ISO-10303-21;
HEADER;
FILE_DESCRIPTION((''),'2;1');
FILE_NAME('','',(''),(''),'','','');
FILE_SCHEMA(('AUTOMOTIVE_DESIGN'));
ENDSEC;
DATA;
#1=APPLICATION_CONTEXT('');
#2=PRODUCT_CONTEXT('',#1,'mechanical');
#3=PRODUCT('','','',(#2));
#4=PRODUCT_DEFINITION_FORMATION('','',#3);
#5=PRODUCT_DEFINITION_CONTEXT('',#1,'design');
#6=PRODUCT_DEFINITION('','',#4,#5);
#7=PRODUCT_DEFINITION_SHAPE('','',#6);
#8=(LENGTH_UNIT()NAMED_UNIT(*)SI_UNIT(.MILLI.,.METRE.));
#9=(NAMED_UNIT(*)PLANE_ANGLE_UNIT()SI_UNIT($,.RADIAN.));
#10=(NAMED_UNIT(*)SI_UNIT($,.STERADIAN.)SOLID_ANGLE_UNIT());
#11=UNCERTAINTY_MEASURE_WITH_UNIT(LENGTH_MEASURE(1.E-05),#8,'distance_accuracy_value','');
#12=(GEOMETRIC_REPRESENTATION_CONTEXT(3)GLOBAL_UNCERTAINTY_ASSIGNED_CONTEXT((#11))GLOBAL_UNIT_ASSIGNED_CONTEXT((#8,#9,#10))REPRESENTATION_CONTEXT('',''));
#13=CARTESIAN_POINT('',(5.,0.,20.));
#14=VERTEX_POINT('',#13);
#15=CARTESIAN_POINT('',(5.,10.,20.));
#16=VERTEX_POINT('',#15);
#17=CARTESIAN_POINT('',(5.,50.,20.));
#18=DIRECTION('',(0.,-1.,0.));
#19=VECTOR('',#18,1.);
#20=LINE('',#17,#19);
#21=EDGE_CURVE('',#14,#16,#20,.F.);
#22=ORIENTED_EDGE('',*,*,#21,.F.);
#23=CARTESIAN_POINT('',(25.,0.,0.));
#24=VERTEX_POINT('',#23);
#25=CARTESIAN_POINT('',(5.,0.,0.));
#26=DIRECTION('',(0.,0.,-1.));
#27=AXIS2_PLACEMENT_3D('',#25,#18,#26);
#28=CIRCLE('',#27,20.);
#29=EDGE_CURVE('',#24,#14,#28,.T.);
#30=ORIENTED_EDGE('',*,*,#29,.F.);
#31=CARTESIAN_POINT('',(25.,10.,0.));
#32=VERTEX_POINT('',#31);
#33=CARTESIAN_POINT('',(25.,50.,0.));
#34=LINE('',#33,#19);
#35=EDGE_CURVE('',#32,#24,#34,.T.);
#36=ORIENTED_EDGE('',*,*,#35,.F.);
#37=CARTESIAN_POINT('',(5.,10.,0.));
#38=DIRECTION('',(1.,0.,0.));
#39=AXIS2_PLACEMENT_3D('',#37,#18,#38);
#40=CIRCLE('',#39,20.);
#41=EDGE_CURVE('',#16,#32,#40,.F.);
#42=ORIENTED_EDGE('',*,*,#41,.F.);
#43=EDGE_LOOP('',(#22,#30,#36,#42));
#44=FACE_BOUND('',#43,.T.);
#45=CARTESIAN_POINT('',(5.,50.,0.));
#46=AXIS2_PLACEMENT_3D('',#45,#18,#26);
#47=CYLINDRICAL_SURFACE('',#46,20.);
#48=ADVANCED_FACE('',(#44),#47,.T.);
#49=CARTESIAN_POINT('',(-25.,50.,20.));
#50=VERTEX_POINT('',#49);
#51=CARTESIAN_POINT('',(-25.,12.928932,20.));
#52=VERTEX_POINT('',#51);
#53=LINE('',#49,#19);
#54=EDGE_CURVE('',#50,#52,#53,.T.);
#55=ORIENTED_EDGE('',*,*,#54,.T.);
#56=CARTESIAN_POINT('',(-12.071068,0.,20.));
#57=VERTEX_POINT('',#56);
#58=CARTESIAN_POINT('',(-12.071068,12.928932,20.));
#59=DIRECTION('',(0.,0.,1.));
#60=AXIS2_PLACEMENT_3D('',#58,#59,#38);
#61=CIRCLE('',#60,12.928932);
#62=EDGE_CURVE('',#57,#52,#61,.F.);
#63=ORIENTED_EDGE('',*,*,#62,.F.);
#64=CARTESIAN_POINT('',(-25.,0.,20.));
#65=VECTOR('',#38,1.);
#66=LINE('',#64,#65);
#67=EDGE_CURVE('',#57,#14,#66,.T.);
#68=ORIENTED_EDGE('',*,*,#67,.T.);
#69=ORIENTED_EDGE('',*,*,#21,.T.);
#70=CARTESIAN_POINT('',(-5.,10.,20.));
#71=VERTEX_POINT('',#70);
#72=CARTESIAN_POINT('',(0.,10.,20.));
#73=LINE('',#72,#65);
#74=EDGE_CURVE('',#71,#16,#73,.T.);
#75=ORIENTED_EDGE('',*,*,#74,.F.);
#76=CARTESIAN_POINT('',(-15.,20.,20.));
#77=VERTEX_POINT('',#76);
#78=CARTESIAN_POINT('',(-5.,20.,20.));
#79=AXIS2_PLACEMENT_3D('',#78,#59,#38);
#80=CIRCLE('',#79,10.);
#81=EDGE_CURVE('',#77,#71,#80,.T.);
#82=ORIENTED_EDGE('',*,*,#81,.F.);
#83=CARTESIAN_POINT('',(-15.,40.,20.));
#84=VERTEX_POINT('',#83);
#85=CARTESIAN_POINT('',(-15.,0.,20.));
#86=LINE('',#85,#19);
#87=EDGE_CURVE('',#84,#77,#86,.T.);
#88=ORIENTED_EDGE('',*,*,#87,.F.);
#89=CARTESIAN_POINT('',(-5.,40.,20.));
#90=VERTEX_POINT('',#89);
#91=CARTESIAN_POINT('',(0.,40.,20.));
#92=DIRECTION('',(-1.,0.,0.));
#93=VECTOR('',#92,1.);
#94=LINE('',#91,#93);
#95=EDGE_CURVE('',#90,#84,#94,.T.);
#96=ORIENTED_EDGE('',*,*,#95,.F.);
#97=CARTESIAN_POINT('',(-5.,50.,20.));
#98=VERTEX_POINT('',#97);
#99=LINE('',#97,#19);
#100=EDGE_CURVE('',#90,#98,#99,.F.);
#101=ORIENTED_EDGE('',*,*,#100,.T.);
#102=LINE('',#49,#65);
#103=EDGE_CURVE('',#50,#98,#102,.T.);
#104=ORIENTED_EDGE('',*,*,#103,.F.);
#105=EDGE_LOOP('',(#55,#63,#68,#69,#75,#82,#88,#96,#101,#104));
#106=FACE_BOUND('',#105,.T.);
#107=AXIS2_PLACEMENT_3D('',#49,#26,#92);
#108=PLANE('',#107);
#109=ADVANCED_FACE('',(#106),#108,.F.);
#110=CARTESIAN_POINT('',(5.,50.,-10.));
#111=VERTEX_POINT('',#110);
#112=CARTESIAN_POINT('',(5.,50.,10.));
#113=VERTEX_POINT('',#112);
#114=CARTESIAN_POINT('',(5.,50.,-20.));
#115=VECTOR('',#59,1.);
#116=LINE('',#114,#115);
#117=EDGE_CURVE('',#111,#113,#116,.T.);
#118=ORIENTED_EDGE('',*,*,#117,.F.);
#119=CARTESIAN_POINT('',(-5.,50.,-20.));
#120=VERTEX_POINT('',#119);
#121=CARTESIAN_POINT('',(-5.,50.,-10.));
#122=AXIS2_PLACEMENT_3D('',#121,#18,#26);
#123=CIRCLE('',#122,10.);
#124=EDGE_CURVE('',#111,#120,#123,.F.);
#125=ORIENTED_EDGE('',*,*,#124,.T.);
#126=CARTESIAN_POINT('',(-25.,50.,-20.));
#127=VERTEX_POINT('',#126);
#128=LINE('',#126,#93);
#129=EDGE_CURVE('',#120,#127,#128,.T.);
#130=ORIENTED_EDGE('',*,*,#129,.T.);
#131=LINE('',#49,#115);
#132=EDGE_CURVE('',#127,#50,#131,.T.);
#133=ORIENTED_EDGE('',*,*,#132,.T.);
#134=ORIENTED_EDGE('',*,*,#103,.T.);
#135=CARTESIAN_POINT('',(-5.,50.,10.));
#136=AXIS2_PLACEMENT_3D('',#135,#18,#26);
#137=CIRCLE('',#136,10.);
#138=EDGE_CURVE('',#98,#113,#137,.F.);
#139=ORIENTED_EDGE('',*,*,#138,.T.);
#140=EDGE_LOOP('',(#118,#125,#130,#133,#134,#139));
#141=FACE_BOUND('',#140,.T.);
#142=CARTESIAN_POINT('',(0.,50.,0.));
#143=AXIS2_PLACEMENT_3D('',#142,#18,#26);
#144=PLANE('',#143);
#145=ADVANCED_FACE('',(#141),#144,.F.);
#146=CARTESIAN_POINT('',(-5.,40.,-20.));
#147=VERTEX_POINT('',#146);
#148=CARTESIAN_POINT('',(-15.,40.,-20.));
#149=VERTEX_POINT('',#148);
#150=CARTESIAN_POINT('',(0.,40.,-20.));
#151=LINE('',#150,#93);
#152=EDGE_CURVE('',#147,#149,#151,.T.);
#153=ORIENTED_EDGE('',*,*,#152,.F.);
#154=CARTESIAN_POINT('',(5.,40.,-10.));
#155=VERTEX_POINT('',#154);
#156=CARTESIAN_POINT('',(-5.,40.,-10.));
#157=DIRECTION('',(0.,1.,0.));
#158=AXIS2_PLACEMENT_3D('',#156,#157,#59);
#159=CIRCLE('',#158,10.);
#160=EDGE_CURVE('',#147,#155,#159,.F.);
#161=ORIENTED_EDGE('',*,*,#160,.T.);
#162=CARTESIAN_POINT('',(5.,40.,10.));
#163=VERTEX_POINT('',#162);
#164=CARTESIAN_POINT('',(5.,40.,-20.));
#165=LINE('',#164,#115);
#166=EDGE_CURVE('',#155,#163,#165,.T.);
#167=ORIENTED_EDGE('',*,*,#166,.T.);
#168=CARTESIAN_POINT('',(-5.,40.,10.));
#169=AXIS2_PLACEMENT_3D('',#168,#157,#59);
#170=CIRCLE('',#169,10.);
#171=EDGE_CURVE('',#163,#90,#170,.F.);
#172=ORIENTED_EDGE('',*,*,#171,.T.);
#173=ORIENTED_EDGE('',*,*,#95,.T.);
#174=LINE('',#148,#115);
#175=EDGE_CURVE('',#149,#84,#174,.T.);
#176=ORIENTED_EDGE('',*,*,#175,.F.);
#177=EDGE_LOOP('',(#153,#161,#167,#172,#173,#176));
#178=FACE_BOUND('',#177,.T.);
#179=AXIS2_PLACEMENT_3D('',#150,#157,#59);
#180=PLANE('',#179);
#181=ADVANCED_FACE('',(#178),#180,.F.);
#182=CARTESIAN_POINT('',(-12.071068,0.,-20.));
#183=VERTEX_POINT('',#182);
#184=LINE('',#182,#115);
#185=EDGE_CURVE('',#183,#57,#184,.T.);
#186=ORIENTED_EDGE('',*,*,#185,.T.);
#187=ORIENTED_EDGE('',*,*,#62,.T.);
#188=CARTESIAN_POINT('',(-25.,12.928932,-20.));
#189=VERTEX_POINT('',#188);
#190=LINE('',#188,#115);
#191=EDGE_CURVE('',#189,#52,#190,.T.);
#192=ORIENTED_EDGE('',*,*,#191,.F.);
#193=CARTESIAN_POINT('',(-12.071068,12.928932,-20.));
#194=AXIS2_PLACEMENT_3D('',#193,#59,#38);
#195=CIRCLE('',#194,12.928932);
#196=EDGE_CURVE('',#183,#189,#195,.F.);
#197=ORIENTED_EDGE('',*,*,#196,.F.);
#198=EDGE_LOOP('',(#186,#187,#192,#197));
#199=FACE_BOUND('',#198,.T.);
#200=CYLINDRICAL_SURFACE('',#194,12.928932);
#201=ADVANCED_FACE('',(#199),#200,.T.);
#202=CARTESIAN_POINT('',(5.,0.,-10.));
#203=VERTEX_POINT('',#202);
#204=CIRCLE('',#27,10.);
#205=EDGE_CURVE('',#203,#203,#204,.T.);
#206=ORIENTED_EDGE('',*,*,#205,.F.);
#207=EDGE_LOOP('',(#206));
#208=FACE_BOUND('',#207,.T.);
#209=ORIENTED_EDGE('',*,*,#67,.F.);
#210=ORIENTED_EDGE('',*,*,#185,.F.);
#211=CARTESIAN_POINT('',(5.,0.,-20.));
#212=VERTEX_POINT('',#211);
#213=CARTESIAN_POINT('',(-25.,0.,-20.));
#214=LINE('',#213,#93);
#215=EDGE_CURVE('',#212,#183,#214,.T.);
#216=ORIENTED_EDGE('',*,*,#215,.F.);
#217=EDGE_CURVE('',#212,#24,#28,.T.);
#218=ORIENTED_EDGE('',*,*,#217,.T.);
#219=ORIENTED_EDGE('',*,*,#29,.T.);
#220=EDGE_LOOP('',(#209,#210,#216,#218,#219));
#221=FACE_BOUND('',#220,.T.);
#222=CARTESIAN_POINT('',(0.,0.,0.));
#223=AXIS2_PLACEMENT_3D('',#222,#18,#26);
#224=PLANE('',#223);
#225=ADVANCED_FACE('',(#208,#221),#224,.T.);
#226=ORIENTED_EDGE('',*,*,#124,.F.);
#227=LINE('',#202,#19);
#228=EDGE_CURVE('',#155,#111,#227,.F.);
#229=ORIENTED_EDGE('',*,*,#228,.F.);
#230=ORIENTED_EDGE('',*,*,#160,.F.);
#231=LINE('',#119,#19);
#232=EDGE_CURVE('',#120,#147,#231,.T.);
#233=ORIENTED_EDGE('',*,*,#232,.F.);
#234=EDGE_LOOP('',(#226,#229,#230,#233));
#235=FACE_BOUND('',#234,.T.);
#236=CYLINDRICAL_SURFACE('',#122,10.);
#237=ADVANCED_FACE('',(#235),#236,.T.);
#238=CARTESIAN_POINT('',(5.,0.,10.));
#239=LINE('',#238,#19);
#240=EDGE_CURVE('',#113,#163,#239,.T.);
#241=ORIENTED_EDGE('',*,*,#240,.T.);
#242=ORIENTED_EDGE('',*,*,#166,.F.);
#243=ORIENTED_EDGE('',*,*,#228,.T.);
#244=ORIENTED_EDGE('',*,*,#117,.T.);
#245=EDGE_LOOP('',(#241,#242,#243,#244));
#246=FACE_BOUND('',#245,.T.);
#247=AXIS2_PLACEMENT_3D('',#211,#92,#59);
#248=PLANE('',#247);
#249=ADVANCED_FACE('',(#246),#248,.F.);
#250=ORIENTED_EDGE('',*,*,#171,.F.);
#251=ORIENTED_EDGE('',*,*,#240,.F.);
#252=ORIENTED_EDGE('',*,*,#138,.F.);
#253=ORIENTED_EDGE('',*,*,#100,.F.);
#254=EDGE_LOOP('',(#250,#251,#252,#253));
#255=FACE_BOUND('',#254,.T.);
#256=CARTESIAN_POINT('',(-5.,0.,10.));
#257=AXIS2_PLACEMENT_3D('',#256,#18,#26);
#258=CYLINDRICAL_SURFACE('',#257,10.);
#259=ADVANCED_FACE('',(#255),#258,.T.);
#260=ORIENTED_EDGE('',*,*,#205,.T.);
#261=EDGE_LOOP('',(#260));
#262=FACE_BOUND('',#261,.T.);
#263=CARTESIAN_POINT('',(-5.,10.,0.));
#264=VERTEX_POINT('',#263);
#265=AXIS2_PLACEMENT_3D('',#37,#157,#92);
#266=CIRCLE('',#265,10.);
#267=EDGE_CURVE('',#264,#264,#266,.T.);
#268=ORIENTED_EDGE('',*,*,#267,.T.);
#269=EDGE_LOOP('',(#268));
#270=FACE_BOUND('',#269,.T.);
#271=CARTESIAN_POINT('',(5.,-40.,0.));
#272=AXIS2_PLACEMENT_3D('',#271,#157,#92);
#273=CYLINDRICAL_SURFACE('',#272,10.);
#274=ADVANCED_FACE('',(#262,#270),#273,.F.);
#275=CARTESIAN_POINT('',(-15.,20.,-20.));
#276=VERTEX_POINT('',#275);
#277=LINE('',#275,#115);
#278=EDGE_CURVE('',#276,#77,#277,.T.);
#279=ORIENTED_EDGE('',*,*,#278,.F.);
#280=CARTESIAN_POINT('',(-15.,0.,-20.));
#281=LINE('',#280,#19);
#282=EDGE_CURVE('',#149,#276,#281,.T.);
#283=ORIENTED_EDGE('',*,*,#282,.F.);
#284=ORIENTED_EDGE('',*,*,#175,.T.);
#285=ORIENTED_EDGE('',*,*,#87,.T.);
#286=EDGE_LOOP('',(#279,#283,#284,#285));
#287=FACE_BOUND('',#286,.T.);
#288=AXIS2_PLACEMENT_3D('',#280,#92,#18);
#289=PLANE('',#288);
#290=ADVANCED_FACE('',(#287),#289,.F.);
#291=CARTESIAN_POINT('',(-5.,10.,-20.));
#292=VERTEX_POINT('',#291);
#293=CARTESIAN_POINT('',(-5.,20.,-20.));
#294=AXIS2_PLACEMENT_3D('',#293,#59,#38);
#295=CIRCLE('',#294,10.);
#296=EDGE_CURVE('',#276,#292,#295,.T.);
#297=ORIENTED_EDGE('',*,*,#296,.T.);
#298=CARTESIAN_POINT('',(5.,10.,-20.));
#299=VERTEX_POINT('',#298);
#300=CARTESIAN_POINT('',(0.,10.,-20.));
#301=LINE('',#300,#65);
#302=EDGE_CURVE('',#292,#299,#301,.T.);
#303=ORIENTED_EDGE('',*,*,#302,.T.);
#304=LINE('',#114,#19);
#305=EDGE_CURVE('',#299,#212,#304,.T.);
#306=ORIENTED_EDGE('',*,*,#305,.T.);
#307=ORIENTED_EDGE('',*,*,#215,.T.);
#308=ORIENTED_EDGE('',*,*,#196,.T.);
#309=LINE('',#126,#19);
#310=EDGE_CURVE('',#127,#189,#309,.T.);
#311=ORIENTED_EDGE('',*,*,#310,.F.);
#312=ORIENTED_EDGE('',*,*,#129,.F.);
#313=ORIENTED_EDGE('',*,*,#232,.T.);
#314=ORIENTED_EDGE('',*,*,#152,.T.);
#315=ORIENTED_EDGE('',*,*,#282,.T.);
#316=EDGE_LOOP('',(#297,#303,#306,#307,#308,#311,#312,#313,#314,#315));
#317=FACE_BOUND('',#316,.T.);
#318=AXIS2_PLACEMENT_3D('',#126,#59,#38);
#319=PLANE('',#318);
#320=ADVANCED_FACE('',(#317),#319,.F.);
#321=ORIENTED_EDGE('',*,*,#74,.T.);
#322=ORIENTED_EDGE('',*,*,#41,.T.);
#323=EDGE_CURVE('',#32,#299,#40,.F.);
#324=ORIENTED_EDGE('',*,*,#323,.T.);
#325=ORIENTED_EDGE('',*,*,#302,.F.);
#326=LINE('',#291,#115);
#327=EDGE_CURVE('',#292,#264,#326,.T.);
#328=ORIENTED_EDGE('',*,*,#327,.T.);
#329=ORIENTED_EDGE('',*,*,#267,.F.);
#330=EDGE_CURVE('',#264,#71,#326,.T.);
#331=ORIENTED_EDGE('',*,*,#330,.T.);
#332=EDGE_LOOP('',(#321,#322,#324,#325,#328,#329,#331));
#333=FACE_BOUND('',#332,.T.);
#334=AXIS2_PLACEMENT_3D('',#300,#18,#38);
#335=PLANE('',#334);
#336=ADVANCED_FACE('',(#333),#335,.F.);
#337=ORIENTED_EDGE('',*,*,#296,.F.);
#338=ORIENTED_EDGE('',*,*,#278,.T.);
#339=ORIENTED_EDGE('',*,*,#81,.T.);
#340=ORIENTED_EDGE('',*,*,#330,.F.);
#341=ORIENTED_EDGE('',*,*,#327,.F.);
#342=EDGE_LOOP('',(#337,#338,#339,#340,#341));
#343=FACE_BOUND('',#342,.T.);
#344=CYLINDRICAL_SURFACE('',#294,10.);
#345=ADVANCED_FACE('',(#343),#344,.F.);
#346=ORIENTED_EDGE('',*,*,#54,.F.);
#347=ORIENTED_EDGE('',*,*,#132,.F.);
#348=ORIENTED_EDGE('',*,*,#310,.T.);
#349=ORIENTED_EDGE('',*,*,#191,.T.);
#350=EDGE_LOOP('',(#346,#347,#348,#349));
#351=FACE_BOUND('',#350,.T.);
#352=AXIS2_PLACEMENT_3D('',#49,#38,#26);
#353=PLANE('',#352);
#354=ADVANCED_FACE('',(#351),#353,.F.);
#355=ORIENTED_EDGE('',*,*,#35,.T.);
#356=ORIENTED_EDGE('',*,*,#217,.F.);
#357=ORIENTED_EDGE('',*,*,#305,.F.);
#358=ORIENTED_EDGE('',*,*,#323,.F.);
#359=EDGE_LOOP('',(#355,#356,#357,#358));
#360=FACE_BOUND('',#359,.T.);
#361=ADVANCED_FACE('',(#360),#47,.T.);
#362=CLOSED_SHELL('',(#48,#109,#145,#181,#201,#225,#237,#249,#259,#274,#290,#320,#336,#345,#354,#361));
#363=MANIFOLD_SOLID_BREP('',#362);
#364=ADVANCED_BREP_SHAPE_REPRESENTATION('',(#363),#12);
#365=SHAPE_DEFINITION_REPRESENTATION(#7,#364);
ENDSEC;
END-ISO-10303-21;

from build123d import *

# Parameters (mm, degrees)
SKETCH_1_W          = 50
SKETCH_1_H          = 40
EXTRUDE_1_DEPTH     = 50
CUT_EXTRUDE_1_DEPTH = 69.738635424
FILLET_1_R          = 10
FILLET_2_R          = 20
SKETCH_4_R          = 10
CUT_EXTRUDE_2_DEPTH = 50


with BuildPart() as part:
    # 草圖1 → 填料-伸長1 (new body)
    with BuildSketch(Plane(origin=(0, 0, 0), x_dir=(1, 0, 0), z_dir=(0, 1, 0))):
        Rectangle(SKETCH_1_W, SKETCH_1_H)
    extrude(amount=EXTRUDE_1_DEPTH)

    # 草圖2 → 除料-伸長1 (cut, through all)
    with BuildSketch(Plane.XY.offset(20)):
        with BuildLine():
            Line((25, 50), (5, 50))
            Line((5, 50), (5, 40))
            Line((5, 40), (-15, 40))
            Line((-15, 40), (-15, 20))
            ThreePointArc((-15, 20), (-12.071067812, 12.928932188), (-5, 10))
            Line((-5, 10), (25, 10))
            Line((25, 10), (25, 50))
        make_face()
        with BuildLine():
            ThreePointArc((-12.071067812, 0), (-21.213203436, 3.786796564), (-25, 12.928932188))
            Line((-25, 12.928932188), (-25, 0))
            Line((-25, 0), (-12.071067812, 0))
        make_face()
    extrude(amount=-CUT_EXTRUDE_1_DEPTH, mode=Mode.SUBTRACT)

    # 圓角1
    fillet_1_edges = [part.edges().sort_by_distance(p)[0] for p in [
        (5, 45, -20),
        (5, 45, 20),
    ]]
    fillet(fillet_1_edges, radius=FILLET_1_R)

    # 圓角2
    fillet_2_edges = [part.edges().sort_by_distance(p)[0] for p in [
        (25, 5, -20),
        (25, 5, 20),
    ]]
    fillet(fillet_2_edges, radius=FILLET_2_R - 0.0001)  # a hair under: the kernel refuses the full size

    # 草圖4 → 除料-伸長2 (cut)
    with BuildSketch(Plane(origin=(0, 10, 0), x_dir=(1, 0, 0), z_dir=(0, 1, 0))):
        with Locations(Location((5, 0, 0), (0, 0, 180))):
            Circle(SKETCH_4_R)
    extrude(amount=-CUT_EXTRUDE_2_DEPTH, mode=Mode.SUBTRACT)


solid = part.part
